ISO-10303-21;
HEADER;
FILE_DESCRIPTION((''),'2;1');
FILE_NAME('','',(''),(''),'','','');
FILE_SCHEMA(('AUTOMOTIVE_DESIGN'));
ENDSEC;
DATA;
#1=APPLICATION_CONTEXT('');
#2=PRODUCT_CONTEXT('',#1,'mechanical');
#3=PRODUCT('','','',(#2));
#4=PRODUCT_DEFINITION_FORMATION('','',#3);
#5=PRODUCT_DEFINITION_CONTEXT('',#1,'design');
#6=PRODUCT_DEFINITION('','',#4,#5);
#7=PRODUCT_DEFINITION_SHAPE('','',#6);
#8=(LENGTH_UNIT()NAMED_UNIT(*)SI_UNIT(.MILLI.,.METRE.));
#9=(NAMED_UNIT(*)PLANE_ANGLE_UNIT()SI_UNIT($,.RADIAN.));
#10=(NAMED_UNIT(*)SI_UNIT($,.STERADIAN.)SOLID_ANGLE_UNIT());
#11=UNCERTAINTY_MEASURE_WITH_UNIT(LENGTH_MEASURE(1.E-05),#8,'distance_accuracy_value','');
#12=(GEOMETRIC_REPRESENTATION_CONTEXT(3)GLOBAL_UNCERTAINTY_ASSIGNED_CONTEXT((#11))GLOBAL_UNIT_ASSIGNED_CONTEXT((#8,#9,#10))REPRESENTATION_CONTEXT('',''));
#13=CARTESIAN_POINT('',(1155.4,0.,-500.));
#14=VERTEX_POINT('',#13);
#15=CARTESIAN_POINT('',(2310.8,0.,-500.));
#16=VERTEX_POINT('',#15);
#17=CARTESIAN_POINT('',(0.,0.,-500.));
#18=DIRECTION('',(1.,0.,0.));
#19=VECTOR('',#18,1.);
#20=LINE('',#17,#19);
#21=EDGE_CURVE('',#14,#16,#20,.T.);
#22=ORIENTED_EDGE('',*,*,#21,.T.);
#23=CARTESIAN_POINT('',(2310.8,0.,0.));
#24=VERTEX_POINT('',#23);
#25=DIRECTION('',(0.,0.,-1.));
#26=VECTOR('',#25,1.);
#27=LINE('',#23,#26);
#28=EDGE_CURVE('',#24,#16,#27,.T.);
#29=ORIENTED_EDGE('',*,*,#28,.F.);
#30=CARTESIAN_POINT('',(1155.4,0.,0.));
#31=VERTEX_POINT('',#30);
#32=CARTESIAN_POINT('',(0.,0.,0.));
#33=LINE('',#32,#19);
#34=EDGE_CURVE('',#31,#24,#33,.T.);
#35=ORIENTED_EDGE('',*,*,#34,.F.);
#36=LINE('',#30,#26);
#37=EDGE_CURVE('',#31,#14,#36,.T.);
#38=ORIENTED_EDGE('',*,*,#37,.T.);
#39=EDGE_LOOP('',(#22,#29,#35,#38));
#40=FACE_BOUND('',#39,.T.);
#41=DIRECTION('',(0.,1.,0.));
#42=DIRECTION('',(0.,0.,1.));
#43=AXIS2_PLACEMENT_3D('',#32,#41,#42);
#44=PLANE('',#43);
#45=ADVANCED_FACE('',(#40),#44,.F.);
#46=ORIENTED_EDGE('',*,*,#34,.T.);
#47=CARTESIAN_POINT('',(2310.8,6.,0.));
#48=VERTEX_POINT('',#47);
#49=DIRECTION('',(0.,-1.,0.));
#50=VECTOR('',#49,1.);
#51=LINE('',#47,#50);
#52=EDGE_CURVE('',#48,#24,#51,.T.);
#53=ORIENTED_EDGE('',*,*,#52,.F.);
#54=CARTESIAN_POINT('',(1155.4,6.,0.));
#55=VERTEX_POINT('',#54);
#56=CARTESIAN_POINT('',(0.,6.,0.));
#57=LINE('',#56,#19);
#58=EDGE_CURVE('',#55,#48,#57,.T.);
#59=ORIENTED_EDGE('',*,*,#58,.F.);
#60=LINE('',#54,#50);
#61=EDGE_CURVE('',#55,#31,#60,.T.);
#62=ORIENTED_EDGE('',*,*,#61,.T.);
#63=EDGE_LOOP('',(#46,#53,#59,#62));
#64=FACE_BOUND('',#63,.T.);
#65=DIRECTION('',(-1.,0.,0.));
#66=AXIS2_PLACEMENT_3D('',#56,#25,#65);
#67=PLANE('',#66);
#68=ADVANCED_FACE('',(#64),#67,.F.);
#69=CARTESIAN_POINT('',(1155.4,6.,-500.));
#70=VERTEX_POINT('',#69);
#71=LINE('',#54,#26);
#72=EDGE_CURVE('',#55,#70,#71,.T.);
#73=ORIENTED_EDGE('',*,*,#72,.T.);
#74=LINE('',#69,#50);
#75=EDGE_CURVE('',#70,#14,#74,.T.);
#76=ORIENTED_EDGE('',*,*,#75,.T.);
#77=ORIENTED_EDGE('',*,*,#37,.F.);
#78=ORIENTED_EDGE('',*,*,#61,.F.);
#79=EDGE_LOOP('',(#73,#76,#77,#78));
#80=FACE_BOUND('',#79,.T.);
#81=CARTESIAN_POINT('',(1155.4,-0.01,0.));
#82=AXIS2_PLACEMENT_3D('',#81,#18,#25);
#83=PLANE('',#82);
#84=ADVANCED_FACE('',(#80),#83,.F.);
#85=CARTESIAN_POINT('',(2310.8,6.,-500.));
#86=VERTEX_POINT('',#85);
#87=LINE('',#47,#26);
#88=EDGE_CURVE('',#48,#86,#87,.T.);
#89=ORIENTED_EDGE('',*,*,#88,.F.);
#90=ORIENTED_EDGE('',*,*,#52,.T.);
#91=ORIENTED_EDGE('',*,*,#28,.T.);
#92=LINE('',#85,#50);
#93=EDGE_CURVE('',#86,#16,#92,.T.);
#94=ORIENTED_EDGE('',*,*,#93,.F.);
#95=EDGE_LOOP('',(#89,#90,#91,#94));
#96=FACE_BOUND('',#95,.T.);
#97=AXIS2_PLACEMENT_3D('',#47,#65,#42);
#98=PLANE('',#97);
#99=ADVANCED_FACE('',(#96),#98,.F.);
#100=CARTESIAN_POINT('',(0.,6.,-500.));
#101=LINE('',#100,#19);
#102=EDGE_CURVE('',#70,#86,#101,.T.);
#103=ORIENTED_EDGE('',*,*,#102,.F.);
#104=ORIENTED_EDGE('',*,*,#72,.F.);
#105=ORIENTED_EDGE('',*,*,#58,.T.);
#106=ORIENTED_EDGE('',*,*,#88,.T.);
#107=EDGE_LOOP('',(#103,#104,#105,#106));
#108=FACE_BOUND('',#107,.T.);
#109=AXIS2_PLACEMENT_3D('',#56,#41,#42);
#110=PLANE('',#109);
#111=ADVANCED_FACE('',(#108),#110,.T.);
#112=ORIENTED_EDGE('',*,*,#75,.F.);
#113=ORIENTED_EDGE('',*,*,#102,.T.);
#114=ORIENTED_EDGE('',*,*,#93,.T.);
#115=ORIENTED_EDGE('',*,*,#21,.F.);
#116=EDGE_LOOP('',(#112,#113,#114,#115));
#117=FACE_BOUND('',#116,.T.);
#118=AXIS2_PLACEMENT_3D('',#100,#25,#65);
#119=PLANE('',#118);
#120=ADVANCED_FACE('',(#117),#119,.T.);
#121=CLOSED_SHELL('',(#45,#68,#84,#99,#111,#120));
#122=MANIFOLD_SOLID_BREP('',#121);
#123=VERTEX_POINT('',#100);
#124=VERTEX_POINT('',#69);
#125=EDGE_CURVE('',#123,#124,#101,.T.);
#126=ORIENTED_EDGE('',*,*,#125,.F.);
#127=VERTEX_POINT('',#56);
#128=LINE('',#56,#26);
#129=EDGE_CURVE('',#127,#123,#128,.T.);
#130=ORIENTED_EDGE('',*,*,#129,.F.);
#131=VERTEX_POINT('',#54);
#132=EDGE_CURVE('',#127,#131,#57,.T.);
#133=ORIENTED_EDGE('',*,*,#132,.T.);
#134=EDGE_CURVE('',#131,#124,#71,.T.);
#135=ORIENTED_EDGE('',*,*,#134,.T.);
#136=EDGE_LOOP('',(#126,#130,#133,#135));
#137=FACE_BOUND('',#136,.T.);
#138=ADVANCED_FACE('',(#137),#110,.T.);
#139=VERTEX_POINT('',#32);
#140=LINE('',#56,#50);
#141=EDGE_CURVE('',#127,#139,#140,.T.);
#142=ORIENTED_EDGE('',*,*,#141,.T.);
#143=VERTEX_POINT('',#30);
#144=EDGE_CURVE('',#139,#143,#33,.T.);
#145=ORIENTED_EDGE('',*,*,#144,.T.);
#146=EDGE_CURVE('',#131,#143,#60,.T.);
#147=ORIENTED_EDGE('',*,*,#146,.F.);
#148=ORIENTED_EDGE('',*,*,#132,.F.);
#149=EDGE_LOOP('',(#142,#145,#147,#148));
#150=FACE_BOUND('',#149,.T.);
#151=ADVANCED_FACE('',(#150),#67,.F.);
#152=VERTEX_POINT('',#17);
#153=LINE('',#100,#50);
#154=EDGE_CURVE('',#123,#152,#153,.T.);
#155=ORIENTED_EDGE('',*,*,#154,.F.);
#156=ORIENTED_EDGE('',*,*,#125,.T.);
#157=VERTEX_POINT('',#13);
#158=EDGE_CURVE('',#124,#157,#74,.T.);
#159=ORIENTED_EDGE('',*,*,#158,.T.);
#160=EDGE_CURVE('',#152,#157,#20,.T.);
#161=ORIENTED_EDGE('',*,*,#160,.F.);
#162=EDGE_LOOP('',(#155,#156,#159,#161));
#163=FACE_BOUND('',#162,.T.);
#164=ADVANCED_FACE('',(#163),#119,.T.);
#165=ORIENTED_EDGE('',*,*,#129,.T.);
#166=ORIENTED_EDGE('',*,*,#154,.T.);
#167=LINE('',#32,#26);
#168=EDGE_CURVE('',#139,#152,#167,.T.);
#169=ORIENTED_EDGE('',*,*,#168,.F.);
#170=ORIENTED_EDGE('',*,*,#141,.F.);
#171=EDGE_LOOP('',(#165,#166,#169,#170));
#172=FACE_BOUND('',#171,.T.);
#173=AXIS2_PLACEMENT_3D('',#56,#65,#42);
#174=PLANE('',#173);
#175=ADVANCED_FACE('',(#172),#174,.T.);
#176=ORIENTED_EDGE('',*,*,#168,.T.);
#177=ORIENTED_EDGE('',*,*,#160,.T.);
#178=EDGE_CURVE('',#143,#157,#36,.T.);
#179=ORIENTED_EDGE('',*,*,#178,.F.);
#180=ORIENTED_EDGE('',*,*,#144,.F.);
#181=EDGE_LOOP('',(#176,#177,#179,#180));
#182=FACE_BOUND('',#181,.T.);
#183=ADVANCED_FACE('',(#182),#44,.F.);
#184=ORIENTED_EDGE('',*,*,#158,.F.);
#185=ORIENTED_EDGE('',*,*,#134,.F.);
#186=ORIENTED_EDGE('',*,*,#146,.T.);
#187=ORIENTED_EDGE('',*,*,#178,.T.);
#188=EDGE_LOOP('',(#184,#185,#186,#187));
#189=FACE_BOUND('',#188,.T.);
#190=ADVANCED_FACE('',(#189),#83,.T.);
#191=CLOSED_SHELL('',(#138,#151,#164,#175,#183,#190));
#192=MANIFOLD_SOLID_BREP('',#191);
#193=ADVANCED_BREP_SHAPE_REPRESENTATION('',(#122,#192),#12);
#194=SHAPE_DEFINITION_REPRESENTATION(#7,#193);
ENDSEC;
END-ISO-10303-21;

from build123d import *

# Parameters (mm, degrees)
SKETCH1_W           = 2310.8
SKETCH1_H           = 500
BOSS_EXTRUDE1_DEPTH = 6


# Read off the part's stored shape, not the designer's step: Split2
with BuildPart() as part:
    # Sketch1 → Boss-Extrude1 (new body)
    with BuildSketch(Plane(origin=(0, 0, 0), x_dir=(1, 0, 0), z_dir=(0, 1, 0))):
        with Locations((1155.4, 250)):
            Rectangle(SKETCH1_W, SKETCH1_H)
    extrude(amount=BOSS_EXTRUDE1_DEPTH)


with BuildPart() as body_2:
    # Split2: the piece on the far side of the plane
    add(part.part)
    split(bisect_by=Plane.YZ.offset(1155.4), keep=Keep.BOTTOM)


with BuildPart() as part_1:
    add(part.part)

    # Split2
    split(bisect_by=Plane.YZ.offset(1155.4), keep=Keep.TOP)


solid = Compound([body_2.part, part_1.part])
